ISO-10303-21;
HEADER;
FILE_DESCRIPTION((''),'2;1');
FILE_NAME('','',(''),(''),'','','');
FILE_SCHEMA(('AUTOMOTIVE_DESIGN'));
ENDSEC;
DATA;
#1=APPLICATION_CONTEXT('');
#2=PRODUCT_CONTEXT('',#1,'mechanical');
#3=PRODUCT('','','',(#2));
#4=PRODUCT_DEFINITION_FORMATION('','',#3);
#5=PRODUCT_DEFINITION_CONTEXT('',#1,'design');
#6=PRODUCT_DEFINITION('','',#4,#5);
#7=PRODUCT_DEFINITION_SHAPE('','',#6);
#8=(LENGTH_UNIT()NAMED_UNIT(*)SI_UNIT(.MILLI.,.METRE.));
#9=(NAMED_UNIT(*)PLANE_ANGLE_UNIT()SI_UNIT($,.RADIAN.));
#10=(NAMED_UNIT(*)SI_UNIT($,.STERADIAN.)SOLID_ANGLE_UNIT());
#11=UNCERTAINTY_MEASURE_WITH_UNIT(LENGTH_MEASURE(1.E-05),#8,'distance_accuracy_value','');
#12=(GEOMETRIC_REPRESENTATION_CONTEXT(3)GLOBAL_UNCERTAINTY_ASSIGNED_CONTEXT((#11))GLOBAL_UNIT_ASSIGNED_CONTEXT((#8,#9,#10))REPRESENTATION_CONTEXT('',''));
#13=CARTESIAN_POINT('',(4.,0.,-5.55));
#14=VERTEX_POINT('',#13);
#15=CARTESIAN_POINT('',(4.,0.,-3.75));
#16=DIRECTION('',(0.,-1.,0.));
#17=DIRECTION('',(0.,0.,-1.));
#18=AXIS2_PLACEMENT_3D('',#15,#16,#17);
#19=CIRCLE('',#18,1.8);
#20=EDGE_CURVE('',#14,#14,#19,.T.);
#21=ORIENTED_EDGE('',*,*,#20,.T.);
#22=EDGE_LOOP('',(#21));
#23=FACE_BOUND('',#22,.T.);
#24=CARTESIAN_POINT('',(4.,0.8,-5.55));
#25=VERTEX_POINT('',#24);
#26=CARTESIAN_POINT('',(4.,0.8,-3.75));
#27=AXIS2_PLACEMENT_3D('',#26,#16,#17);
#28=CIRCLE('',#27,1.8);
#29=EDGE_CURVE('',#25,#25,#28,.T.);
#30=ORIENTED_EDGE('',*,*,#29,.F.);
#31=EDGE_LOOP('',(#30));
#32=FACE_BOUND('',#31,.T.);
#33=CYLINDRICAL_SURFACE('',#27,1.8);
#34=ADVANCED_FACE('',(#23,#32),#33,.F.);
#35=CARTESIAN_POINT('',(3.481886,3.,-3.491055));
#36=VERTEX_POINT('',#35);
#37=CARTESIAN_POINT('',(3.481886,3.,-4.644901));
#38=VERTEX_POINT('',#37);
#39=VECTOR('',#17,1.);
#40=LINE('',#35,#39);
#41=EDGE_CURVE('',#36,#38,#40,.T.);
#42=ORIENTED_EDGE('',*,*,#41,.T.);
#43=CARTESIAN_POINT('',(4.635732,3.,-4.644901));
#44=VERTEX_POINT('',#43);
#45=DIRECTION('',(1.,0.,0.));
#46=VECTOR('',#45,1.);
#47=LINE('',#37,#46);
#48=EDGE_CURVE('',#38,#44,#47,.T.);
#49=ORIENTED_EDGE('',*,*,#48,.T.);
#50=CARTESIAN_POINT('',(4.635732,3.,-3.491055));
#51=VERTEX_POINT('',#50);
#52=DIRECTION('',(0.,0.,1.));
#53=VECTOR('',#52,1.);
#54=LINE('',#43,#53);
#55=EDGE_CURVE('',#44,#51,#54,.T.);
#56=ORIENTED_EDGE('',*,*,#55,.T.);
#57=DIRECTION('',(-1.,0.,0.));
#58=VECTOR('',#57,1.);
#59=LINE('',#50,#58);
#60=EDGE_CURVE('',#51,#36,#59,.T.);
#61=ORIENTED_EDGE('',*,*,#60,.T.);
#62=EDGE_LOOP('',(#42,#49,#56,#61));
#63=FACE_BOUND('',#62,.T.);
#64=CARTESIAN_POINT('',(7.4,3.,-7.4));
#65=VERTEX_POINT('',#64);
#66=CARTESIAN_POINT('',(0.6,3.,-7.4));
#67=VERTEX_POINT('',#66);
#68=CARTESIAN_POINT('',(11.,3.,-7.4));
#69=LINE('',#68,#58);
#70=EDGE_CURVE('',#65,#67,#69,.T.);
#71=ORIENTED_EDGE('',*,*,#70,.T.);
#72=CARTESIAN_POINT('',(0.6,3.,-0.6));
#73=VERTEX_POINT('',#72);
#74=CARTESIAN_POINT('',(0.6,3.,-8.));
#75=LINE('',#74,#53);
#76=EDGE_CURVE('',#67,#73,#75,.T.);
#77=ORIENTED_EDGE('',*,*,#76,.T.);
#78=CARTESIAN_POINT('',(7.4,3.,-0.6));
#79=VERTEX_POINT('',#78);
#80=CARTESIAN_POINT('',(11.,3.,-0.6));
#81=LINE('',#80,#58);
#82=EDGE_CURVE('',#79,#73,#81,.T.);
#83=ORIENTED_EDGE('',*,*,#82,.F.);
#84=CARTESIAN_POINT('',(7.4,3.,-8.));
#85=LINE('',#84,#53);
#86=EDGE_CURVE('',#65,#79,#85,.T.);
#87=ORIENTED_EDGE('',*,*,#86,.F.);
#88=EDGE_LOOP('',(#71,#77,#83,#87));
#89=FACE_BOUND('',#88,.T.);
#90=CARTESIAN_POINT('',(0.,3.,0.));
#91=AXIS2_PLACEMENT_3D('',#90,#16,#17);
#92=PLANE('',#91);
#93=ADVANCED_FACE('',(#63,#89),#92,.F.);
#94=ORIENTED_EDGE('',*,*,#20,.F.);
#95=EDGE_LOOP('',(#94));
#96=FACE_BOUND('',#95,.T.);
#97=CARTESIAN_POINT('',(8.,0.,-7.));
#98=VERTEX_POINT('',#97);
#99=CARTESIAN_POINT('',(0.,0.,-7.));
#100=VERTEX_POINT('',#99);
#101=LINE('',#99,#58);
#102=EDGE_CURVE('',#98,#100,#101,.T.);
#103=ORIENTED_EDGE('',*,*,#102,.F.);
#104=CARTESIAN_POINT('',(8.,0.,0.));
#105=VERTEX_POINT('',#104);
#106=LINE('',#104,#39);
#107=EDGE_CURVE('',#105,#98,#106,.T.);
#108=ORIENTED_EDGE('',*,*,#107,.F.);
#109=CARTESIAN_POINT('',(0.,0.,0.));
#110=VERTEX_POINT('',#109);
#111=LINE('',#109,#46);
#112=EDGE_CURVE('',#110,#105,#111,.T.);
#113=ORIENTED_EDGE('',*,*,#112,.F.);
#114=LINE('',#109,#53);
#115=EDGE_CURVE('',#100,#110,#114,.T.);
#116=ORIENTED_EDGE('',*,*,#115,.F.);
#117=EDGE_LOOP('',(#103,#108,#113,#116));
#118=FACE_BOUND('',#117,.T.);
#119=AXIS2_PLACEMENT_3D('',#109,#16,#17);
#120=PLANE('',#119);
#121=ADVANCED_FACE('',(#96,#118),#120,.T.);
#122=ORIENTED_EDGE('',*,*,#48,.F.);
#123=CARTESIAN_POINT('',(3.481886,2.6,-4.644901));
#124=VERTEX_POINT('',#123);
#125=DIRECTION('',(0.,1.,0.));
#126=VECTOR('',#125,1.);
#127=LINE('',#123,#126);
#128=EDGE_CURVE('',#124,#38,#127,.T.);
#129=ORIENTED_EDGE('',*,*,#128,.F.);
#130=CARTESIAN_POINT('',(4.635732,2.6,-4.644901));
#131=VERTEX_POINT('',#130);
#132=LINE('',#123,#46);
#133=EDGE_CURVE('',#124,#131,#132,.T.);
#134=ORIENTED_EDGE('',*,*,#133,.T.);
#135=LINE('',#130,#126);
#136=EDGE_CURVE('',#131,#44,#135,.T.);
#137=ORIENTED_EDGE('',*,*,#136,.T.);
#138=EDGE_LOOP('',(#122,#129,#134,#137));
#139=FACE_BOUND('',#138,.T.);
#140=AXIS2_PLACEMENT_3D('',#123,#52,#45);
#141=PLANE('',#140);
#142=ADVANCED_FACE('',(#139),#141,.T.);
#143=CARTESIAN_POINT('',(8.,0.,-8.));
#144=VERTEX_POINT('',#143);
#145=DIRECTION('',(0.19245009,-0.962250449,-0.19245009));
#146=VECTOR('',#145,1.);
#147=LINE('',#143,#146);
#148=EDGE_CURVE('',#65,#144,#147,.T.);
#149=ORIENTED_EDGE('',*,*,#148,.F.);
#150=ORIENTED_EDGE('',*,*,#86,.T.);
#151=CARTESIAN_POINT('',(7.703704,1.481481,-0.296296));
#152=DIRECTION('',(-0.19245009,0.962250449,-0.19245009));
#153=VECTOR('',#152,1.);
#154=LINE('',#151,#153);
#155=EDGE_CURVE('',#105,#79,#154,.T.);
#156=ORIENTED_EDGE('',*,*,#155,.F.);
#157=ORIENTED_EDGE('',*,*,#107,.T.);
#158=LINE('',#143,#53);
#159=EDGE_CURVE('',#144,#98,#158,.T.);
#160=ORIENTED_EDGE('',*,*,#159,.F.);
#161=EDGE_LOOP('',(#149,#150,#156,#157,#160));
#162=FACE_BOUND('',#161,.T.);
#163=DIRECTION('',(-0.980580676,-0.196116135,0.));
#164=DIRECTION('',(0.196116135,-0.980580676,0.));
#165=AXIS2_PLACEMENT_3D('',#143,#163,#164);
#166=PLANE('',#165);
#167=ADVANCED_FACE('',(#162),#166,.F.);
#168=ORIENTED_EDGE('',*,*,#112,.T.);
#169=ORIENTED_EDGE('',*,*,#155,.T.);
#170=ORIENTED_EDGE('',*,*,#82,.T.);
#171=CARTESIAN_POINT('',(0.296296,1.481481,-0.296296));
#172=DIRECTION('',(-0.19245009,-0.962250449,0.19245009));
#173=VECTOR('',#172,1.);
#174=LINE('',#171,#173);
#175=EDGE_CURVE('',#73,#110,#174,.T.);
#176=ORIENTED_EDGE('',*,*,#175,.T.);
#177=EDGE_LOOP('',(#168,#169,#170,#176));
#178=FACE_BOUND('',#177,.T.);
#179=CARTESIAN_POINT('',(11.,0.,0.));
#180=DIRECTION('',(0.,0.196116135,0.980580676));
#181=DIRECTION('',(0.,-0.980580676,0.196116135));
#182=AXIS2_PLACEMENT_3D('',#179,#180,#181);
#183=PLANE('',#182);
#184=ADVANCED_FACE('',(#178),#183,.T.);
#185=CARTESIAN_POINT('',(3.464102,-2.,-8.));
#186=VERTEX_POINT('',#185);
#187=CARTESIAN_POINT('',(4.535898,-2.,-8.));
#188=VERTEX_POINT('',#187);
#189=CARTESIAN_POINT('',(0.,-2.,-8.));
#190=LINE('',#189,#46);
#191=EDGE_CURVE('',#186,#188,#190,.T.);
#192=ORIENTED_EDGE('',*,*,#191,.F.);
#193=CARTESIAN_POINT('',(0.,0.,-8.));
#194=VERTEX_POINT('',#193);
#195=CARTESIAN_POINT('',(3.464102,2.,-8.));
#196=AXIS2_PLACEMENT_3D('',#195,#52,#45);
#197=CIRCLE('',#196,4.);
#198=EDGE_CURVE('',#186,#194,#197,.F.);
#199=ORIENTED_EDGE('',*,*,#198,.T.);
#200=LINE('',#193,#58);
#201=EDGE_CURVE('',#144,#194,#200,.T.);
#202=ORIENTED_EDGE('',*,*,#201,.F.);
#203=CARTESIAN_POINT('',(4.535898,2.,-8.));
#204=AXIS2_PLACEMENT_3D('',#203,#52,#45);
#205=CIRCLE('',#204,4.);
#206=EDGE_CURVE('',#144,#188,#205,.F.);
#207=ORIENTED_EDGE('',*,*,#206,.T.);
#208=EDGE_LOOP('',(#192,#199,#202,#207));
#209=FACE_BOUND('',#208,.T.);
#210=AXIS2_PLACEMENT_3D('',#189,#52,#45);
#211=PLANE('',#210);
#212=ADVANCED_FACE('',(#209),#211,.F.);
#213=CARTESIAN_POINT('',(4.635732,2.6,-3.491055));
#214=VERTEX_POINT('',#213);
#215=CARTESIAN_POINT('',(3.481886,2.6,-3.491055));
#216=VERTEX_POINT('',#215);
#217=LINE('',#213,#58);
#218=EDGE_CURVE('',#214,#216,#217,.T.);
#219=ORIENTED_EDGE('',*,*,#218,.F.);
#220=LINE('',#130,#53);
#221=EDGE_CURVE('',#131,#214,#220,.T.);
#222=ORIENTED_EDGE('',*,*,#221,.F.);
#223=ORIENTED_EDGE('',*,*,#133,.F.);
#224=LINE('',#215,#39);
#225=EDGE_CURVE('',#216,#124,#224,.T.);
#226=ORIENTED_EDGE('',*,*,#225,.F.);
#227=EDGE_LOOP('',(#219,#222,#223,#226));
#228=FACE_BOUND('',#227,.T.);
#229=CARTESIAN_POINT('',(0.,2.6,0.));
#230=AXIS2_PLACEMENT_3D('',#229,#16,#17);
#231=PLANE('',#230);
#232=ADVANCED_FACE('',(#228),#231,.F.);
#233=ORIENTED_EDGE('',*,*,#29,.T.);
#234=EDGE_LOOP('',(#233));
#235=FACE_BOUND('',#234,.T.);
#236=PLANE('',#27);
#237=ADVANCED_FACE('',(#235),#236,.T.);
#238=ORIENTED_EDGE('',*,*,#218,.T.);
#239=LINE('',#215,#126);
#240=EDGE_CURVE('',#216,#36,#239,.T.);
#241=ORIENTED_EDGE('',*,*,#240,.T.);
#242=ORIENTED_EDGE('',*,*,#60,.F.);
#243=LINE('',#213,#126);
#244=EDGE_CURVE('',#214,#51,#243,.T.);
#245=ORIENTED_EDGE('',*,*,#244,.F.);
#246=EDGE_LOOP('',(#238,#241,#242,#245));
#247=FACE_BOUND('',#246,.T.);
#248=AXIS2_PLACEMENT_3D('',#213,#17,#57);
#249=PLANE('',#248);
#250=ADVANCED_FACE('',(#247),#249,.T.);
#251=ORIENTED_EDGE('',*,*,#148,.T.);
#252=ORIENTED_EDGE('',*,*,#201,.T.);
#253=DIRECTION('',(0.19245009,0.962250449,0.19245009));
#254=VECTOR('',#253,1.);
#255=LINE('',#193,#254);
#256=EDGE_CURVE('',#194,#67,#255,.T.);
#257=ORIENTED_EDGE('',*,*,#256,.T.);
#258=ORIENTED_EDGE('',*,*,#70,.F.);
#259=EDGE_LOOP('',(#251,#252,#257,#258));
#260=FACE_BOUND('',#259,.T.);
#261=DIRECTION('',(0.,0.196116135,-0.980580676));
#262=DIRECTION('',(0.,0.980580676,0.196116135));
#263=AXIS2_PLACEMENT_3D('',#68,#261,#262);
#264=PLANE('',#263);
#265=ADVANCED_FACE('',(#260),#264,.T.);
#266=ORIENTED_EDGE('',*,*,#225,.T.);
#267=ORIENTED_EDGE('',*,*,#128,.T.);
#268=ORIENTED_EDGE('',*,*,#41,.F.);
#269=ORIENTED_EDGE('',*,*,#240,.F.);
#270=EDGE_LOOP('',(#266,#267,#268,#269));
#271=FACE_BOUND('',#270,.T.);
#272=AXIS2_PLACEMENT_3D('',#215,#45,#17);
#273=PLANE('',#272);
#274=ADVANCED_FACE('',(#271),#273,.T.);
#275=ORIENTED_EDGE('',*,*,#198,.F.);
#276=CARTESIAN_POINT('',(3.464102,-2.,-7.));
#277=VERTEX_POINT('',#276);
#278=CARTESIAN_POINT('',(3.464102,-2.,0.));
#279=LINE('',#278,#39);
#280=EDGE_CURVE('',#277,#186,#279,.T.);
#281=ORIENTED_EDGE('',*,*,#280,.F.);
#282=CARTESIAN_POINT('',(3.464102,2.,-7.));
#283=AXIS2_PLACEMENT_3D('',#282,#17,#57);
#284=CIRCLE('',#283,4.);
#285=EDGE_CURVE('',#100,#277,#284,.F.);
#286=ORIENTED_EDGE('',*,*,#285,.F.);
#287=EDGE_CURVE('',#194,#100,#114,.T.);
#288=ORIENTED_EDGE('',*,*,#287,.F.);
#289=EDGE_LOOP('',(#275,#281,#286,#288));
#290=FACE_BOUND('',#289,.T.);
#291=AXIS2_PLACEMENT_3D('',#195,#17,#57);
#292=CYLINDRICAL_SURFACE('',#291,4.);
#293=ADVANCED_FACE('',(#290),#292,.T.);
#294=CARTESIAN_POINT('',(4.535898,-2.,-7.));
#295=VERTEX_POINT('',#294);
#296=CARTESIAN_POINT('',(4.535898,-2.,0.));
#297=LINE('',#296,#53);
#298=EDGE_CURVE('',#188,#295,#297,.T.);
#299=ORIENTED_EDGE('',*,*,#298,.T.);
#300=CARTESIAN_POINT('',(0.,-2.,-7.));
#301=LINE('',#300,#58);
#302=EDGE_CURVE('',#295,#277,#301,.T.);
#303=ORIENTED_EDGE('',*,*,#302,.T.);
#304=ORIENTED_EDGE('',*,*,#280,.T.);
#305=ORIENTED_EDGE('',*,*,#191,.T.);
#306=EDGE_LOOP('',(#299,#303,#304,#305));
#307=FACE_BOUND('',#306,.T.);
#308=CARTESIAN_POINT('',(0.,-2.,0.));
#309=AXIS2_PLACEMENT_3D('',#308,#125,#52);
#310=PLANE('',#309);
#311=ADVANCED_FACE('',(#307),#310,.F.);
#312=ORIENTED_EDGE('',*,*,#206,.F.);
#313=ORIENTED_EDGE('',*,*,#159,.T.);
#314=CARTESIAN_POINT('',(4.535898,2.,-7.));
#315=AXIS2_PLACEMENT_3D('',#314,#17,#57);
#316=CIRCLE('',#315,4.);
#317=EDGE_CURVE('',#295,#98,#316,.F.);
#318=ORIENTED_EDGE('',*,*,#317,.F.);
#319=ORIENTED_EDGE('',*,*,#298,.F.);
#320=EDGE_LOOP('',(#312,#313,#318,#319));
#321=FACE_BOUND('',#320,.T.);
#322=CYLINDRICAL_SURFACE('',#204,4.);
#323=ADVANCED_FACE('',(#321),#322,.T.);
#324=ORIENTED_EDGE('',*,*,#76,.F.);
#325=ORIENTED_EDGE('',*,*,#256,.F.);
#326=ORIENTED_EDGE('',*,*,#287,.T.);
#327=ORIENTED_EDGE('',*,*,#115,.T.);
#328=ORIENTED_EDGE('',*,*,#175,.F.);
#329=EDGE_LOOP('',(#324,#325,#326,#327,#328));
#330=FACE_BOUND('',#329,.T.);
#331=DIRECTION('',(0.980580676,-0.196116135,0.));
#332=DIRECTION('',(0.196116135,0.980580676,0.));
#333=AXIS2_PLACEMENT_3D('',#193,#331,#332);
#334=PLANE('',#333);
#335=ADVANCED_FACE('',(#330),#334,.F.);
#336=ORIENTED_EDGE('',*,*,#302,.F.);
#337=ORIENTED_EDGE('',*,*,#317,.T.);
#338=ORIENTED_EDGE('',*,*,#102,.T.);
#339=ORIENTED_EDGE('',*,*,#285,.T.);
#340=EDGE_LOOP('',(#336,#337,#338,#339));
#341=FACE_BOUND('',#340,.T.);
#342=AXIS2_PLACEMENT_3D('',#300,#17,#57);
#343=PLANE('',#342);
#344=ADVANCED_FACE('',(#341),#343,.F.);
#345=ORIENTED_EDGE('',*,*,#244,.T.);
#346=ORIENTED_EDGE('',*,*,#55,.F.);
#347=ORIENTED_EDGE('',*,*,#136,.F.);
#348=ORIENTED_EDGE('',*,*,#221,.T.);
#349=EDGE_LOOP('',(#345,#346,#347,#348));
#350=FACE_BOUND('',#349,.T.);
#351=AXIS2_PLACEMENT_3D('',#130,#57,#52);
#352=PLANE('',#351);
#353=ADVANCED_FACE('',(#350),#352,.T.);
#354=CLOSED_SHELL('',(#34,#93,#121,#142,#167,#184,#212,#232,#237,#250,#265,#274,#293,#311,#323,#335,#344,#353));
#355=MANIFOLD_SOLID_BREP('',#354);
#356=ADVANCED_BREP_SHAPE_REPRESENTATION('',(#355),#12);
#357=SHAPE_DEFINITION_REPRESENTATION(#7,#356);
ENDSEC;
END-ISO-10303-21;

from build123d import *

# Parameters (mm, degrees)
SKETCH1_W               = 8
SKETCH1_H               = 8
BOSS_EXTRUDE1_DEPTH     = 3
CUT_EXTRUDE1_DEPTH      = 12.704699911
CUT_EXTRUDE1_DEPTH_BACK = 12.704699911
CUT_EXTRUDE2_DEPTH      = 11
SKETCH4_R               = 1.8
CUT_EXTRUDE3_DEPTH      = 0.8
SKETCH5_W               = 8
SKETCH5_H               = 1
BOSS_EXTRUDE2_DEPTH     = 2
FILLET1_R               = 4
SKETCH6_W               = 1.153846154
SKETCH6_H               = 1.153846154
CUT_EXTRUDE4_DEPTH      = 0.4


with BuildPart() as part:
    # Sketch1 → Boss-Extrude1 (new body)
    with BuildSketch(Plane(origin=(0, 0, 0), x_dir=(1, 0, 0), z_dir=(0, 1, 0))):
        with Locations((4, 4)):
            Rectangle(SKETCH1_W, SKETCH1_H)
    extrude(amount=BOSS_EXTRUDE1_DEPTH)

    # Sketch2 → Cut-Extrude1 (cut, two sides: drawn at the far end of the back side and taken through both)
    with BuildSketch(Plane.XY.offset(-CUT_EXTRUDE1_DEPTH_BACK)):
        Polygon((0, 0), (0.6, 3), (0, 3), align=None)
        Polygon((8, 0), (7.4, 3), (8, 3), align=None)
    extrude(amount=CUT_EXTRUDE1_DEPTH + CUT_EXTRUDE1_DEPTH_BACK, mode=Mode.SUBTRACT)

    # Sketch3 → Cut-Extrude2 (cut)
    with BuildSketch(Plane(origin=(0, 0, 0), x_dir=(0, 0, -1), z_dir=(1, 0, 0))):
        Polygon((0, 0), (0.6, 3), (0, 3), align=None)
        Polygon((8, 3), (7.4, 3), (8, 0), align=None)
    extrude(amount=CUT_EXTRUDE2_DEPTH, mode=Mode.SUBTRACT)

    # Sketch4 → Cut-Extrude3 (cut)
    with BuildSketch(Plane.XZ):
        with Locations(Location((4, -3.75, 0), (0, 0, 270))):
            Circle(SKETCH4_R)
    extrude(amount=-CUT_EXTRUDE3_DEPTH, mode=Mode.SUBTRACT)

    # Sketch5 → Boss-Extrude2 (add)
    with BuildSketch(Plane.XZ):
        with Locations((4, -7.5)):
            Rectangle(SKETCH5_W, SKETCH5_H)
    extrude(amount=BOSS_EXTRUDE2_DEPTH)

    # Fillet1
    # the kernel refuses this fillet: 4 mm, written as the material it takes off along each edge
    with BuildSketch(Plane(origin=(8, -2, -16.660254038), x_dir=(0, 1, 0), z_dir=(0, 0, 1)), Plane(origin=(0, -2, 1.660254038), x_dir=(0, 1, 0), z_dir=(0, 0, -1))) as fillet1_piece_1:
        with BuildLine():
            CenterArc((4, 3.464101615), FILLET1_R, 180, 60)
            Line((0, 3.464101615), (-0.08, 3.464101615))
            Line((-0.08, 3.464101615), (-0.08, 0))
            Line((-0.08, 0), (0, -0.08))
            ThreePointArc((0, -0.08), (1, -0.08), (1.96, -0.069282032))
            Line((1.96, -0.069282032), (2, 0))
        make_face()
    extrude(amount=18.320508076, mode=Mode.SUBTRACT)

    # Sketch6 → Cut-Extrude4 (cut)
    with BuildSketch(Plane(origin=(0, 3, 0), x_dir=(1, 0, 0), z_dir=(0, 1, 0))):
        with Locations((4.058809338, 4.067977948)):
            Rectangle(SKETCH6_W, SKETCH6_H)
    extrude(amount=-CUT_EXTRUDE4_DEPTH, mode=Mode.SUBTRACT)


solid = part.part
